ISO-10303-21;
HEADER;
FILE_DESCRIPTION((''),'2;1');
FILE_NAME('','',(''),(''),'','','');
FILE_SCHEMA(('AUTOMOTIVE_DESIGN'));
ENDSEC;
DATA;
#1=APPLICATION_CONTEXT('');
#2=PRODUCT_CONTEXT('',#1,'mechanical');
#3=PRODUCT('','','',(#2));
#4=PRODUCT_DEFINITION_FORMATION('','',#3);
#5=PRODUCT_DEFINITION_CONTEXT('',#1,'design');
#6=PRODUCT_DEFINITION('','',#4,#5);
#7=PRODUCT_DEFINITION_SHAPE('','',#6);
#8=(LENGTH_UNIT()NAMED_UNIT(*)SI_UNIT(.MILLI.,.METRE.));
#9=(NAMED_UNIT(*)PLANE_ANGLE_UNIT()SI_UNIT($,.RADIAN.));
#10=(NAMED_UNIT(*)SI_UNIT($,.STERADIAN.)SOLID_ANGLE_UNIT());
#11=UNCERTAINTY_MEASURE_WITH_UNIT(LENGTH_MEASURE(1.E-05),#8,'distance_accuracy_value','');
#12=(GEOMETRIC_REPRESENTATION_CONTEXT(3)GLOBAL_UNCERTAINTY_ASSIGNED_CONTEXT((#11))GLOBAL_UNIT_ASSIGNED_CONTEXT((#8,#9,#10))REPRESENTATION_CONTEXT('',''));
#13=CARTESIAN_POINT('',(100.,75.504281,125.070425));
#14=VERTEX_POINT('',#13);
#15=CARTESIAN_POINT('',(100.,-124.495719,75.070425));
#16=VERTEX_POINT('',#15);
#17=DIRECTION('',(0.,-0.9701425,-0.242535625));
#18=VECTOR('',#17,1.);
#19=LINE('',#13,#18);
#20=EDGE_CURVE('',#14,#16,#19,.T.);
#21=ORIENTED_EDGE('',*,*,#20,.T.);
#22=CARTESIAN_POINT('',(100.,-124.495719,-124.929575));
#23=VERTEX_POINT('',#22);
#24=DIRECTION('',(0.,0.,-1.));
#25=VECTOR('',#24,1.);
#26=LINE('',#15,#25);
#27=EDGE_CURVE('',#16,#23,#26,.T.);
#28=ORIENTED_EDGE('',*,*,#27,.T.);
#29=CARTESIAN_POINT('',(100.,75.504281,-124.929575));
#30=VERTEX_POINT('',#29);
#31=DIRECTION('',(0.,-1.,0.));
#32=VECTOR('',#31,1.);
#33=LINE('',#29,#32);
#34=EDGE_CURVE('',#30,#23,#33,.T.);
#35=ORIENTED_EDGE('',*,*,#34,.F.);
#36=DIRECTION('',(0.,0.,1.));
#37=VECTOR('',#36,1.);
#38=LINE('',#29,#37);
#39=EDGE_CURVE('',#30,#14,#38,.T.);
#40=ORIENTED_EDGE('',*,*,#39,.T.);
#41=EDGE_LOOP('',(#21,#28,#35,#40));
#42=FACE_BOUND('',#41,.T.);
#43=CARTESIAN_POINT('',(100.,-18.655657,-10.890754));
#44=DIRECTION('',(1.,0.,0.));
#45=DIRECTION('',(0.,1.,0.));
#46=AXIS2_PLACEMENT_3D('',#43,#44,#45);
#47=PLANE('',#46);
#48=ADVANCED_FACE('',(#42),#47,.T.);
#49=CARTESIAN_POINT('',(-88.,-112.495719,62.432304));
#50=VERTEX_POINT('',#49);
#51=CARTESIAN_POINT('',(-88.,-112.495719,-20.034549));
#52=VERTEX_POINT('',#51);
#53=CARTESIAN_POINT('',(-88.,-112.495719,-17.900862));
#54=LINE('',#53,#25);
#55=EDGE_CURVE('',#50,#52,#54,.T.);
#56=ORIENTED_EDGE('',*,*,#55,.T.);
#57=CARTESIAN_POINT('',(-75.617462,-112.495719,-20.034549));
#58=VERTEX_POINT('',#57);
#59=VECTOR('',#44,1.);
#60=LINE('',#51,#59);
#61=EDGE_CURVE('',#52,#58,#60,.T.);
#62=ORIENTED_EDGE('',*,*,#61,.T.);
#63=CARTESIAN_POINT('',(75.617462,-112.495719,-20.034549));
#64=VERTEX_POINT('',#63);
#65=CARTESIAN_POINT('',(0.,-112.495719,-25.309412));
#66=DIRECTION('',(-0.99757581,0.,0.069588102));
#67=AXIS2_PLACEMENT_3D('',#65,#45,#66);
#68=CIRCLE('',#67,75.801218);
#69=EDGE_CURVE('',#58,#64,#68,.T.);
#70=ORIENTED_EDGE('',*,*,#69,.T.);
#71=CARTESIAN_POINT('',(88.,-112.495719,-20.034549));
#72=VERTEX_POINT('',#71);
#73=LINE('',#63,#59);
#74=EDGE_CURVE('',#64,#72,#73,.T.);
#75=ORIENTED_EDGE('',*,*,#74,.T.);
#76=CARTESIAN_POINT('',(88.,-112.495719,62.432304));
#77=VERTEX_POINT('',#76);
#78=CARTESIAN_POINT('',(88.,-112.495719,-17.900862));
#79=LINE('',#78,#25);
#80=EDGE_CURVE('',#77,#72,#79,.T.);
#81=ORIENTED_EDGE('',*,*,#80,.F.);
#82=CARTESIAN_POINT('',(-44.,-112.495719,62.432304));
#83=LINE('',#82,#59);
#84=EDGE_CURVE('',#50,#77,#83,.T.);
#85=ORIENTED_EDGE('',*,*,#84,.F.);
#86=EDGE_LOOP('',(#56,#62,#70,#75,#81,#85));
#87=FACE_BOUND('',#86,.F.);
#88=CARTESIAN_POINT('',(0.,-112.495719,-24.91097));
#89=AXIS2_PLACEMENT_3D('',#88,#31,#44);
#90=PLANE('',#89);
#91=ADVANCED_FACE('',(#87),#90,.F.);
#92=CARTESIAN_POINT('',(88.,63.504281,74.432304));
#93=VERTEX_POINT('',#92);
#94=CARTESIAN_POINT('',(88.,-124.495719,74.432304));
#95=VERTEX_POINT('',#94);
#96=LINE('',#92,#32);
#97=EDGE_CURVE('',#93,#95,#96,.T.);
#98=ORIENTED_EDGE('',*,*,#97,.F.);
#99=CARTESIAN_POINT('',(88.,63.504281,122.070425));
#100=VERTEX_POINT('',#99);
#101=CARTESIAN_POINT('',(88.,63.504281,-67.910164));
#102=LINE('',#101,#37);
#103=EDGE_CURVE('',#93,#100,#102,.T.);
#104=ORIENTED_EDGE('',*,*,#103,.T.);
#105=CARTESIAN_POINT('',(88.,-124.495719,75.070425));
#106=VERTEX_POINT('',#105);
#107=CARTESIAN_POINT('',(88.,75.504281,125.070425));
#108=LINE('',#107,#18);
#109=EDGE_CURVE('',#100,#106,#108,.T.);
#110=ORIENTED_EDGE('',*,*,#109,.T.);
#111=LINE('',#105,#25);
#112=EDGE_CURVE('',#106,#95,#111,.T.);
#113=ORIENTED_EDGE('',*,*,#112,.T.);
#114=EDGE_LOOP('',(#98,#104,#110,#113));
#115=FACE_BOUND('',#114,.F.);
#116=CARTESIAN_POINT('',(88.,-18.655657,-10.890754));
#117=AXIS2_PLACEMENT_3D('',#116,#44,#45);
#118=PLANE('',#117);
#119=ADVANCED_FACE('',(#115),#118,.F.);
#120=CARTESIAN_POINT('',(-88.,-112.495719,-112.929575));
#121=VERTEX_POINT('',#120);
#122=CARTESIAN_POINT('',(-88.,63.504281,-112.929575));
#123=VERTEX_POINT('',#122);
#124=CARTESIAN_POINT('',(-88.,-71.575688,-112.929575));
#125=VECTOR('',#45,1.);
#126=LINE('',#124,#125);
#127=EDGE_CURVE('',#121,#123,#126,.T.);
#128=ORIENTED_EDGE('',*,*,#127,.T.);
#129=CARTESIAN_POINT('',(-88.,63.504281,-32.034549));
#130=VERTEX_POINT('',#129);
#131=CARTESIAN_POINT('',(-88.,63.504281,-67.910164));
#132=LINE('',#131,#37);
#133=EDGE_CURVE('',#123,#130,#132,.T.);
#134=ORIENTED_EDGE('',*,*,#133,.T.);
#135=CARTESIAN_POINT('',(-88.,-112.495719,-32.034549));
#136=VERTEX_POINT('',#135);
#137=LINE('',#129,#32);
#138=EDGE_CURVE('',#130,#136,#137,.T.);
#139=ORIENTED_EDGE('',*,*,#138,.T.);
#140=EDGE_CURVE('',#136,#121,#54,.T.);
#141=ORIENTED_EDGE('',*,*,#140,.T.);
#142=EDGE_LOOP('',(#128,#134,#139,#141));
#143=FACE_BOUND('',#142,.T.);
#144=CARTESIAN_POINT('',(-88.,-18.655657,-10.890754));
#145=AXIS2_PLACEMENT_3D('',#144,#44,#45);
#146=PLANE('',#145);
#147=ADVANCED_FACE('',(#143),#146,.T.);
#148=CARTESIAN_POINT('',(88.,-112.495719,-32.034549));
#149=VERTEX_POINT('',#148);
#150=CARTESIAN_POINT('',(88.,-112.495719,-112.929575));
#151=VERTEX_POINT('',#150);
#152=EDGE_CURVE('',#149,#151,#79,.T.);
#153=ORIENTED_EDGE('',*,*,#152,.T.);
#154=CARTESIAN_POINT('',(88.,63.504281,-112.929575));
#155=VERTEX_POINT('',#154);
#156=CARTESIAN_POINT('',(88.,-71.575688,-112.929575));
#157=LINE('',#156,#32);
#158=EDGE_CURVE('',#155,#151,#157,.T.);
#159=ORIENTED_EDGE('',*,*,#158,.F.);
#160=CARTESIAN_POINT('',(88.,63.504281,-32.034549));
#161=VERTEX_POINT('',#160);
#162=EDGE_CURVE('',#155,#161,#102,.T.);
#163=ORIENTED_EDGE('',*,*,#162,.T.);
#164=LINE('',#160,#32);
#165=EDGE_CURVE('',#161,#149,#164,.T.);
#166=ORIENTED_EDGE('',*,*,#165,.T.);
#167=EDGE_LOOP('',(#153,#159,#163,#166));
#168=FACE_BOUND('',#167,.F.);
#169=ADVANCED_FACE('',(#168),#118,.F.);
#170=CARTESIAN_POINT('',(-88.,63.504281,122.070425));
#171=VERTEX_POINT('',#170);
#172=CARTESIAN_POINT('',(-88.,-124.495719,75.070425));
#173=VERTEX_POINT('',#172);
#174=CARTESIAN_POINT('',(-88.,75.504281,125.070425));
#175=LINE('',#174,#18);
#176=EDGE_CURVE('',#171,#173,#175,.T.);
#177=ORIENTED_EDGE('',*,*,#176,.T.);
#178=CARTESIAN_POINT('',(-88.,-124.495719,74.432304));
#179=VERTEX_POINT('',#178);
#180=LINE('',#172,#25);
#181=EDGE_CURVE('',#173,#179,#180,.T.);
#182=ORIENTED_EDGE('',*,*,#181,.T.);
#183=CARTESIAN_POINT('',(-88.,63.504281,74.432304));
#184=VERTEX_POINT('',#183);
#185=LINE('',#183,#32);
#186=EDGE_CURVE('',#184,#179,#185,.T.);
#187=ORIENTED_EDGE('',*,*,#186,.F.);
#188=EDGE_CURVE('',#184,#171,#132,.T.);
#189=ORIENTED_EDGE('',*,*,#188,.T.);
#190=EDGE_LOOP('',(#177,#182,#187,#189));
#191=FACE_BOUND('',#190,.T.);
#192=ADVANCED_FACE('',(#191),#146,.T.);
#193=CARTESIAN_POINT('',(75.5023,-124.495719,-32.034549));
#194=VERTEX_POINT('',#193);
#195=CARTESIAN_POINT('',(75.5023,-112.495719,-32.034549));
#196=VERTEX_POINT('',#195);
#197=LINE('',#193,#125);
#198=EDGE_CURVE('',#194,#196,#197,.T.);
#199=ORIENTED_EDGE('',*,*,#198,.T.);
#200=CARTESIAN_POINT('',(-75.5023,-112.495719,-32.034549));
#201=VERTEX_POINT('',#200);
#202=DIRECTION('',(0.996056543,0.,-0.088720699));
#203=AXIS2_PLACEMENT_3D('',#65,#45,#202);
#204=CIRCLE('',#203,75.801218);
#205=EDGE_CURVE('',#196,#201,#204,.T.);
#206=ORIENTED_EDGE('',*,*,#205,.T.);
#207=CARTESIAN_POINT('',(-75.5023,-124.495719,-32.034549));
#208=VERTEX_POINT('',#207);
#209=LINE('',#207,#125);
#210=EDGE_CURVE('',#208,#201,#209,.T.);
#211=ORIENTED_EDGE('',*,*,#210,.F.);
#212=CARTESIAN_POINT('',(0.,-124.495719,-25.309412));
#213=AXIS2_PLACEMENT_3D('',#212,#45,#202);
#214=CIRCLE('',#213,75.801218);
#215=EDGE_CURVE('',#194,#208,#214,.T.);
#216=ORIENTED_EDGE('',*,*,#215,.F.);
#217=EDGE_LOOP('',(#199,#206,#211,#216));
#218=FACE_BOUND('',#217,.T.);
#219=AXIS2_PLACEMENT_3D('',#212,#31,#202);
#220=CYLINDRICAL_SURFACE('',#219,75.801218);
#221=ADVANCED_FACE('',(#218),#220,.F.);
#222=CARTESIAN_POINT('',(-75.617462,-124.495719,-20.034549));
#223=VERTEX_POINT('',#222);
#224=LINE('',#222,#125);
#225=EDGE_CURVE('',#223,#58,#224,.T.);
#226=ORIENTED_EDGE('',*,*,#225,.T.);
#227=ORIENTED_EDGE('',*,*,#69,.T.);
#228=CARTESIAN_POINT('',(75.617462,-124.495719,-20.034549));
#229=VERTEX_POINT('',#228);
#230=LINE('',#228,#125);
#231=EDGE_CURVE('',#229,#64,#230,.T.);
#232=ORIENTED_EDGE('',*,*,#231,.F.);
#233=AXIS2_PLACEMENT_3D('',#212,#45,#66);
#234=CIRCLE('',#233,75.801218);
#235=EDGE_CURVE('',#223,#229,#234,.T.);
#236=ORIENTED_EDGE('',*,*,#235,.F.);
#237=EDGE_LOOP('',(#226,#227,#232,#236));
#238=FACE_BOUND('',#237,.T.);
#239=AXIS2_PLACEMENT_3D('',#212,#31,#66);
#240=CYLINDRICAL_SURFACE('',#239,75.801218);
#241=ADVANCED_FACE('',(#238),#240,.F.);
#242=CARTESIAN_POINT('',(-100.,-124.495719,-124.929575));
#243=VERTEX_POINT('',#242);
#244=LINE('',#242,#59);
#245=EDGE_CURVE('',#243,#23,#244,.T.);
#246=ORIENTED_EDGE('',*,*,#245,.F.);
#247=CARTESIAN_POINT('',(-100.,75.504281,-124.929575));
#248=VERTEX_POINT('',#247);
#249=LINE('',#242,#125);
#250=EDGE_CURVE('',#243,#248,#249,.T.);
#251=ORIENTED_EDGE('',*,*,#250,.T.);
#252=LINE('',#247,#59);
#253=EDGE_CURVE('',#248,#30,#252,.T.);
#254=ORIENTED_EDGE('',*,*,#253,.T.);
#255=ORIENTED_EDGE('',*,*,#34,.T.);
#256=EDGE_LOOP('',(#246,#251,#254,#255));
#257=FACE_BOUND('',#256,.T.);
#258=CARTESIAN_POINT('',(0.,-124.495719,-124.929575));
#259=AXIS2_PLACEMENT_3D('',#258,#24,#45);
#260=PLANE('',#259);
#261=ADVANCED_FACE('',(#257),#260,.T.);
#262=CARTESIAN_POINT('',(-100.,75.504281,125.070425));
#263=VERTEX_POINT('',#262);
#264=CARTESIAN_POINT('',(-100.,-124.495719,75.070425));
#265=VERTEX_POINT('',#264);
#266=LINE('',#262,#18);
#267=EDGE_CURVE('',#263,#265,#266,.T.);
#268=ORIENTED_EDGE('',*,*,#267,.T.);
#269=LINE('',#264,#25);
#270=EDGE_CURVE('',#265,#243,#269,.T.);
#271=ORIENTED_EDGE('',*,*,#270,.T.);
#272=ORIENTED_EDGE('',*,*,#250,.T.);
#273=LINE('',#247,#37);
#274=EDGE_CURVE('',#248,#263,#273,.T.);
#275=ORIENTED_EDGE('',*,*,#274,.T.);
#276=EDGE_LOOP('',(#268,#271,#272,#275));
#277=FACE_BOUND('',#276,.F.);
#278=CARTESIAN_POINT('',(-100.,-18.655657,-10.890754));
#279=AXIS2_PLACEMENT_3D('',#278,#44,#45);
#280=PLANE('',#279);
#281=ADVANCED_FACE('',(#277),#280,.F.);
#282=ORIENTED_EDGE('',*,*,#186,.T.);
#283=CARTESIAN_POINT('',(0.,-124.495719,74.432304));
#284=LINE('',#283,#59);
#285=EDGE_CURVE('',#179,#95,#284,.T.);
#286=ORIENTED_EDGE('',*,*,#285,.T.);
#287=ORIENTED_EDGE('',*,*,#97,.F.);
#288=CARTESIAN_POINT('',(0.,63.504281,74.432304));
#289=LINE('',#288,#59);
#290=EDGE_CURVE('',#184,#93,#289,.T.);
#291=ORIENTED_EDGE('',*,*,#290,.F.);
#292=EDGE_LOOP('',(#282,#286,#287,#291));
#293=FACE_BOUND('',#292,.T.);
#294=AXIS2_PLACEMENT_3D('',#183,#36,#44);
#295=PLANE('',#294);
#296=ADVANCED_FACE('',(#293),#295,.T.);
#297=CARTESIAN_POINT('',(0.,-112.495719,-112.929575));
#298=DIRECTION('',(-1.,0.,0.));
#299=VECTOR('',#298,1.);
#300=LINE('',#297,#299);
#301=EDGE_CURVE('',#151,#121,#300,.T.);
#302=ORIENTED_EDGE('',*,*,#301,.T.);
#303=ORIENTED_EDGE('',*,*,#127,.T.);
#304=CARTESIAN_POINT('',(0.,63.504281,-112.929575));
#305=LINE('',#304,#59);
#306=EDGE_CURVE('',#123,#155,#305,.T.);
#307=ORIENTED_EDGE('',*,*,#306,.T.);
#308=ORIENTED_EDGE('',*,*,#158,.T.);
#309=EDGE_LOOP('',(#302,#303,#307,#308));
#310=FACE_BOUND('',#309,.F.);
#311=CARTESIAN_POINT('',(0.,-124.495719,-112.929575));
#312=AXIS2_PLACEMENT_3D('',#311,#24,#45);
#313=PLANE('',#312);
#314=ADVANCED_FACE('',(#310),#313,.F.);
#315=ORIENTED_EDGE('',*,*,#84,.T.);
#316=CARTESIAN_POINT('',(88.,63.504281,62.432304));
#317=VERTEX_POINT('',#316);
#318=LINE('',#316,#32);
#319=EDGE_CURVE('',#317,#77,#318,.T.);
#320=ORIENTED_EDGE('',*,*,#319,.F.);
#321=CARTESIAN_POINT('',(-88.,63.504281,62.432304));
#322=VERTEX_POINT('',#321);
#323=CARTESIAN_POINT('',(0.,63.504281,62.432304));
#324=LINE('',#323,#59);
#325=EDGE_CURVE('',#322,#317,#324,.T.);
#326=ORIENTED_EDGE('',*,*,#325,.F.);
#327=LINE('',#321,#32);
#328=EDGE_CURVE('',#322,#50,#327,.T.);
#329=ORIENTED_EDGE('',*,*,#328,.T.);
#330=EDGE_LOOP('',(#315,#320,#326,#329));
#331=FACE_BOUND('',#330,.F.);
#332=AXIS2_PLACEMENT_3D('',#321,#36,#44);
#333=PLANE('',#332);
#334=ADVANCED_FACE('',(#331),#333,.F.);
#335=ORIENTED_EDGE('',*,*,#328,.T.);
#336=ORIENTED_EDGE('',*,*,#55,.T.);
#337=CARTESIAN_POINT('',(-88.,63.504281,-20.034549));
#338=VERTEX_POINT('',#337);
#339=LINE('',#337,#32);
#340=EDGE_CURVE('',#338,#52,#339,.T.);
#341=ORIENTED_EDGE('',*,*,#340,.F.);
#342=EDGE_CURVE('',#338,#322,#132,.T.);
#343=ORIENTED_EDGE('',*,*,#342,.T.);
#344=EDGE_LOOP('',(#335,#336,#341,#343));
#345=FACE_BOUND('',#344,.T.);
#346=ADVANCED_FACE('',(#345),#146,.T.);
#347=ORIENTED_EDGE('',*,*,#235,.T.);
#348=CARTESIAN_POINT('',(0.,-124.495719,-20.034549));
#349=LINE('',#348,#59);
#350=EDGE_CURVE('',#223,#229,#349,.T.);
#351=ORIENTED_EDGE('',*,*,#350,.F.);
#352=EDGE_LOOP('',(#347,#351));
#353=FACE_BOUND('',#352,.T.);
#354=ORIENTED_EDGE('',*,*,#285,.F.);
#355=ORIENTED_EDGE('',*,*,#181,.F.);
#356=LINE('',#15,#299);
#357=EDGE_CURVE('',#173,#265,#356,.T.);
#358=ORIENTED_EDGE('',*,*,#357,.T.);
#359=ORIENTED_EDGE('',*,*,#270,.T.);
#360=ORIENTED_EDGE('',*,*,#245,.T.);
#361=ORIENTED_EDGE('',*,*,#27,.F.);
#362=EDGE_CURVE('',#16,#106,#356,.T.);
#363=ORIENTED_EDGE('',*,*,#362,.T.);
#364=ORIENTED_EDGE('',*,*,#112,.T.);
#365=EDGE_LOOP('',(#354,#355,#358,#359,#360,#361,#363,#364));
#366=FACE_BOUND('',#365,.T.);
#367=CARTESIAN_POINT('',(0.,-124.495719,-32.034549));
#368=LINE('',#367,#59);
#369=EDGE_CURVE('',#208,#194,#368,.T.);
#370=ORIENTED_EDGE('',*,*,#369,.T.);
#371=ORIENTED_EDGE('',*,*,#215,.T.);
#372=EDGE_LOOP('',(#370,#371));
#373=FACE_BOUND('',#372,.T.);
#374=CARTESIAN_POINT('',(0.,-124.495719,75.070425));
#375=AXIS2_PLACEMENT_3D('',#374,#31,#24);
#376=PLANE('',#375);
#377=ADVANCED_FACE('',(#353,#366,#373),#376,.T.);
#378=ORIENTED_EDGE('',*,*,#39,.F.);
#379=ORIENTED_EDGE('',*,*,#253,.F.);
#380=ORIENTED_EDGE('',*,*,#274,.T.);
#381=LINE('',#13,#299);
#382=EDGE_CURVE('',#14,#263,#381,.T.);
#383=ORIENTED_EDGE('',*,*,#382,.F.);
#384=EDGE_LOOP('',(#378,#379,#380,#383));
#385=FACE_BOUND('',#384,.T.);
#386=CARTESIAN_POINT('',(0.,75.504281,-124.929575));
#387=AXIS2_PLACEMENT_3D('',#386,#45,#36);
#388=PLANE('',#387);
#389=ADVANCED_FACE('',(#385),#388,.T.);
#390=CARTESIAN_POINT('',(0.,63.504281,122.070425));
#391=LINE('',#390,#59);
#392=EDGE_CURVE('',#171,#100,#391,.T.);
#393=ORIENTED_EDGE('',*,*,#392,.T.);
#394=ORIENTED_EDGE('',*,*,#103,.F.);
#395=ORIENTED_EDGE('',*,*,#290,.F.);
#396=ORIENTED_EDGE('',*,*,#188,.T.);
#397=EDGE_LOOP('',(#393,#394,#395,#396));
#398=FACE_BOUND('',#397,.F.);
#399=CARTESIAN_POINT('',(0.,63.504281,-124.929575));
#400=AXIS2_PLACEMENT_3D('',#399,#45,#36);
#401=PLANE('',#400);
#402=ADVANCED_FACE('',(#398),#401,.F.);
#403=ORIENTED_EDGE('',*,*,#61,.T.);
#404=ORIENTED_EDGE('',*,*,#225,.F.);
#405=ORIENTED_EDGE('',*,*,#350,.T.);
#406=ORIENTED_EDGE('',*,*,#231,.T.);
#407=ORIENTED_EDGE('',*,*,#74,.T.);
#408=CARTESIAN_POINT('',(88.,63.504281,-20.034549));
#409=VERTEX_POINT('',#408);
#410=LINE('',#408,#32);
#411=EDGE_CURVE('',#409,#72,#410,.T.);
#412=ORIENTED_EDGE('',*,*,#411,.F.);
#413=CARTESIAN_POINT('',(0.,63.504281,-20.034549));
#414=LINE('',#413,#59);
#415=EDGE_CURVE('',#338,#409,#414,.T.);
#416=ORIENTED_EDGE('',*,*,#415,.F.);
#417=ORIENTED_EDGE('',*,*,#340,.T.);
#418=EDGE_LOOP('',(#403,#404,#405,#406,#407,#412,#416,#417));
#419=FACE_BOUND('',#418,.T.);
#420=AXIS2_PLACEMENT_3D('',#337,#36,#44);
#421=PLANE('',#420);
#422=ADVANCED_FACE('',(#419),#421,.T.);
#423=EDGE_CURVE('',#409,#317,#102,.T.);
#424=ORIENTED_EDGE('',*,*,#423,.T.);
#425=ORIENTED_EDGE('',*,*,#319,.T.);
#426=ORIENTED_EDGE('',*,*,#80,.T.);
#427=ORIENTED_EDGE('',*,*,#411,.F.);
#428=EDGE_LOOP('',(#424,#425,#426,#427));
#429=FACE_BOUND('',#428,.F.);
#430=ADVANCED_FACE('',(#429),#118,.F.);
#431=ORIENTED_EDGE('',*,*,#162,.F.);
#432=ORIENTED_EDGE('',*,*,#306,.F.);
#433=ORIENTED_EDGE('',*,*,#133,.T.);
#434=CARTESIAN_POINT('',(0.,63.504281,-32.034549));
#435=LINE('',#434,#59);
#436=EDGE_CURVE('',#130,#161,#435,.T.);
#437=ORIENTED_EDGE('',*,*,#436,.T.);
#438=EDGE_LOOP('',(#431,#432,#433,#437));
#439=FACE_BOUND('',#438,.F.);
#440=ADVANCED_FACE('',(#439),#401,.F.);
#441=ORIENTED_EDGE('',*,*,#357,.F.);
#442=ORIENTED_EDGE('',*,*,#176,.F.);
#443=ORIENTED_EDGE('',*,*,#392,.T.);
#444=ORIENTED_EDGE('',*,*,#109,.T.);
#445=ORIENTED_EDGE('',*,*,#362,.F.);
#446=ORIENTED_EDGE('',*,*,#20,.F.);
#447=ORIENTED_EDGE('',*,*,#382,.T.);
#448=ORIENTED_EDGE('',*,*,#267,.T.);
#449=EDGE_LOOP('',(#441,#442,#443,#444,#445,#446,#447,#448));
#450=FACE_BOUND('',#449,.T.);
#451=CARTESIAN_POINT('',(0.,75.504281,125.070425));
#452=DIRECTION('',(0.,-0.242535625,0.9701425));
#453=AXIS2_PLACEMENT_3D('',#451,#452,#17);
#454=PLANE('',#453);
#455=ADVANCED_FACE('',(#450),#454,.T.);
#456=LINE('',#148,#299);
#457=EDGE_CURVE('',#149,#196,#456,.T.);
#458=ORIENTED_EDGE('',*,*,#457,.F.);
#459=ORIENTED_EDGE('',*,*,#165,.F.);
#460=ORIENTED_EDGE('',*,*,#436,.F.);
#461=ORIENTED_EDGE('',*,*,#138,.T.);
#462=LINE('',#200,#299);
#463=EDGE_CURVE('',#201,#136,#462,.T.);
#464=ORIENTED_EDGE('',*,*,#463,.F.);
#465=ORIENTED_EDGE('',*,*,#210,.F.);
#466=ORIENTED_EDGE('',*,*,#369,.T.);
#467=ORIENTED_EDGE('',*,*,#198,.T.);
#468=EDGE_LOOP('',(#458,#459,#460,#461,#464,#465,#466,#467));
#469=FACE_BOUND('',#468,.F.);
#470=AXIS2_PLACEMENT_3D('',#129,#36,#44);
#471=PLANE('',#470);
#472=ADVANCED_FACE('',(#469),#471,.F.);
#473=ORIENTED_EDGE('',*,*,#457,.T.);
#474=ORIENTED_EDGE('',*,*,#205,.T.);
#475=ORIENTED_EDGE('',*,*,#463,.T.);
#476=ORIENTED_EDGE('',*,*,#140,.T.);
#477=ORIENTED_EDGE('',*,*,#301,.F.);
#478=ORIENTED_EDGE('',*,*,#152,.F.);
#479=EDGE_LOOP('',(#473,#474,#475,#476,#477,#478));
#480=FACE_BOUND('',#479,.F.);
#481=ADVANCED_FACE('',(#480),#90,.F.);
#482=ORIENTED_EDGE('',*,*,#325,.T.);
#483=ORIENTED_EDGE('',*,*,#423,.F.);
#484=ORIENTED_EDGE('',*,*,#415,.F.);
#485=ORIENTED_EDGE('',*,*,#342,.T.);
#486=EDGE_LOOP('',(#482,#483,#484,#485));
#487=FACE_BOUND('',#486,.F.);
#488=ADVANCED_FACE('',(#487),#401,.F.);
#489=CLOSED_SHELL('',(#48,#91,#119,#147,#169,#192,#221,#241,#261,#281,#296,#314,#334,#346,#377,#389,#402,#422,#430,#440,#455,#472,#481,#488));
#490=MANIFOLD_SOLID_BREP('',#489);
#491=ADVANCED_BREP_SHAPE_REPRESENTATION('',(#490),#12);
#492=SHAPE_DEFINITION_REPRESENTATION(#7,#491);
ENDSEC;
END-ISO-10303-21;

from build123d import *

# Parameters (mm, degrees)
F1_DEPTH = 100
F2_T     = -12
F3_W     = 176
F3_H     = 12
F4_DEPTH = 188
F6_DEPTH = 12


with BuildPart() as f1:
    # F0 (on Right) → F1 (new body, symmetric)
    with BuildSketch(Plane.YZ):
        Polygon((-124.4957186917, 75.0704253932), (-124.4957186917, -124.9295746068), (75.5042813083, -124.9295746068), (75.5042813083, 125.0704253932), align=None)
    extrude(amount=F1_DEPTH, both=True)

    # F2
    f2_openings = [f1.faces().sort_by_distance(p)[0] for p in [
        (0, -124.495719, -24.929575),
        (0, -24.495719, 100.070425),
    ]]
    offset(amount=F2_T, openings=f2_openings)

    # F3 (on face) → F4 (join)
    with BuildSketch(Plane.XZ.offset(-63.5042813083)):
        with Locations((0, -26.0345488787)):
            Rectangle(F3_W, F3_H)
        with Locations((0, 68.4323040247)):
            Rectangle(F3_W, F3_H)
    extrude(amount=F4_DEPTH)

    # F5 (on face) → F6 (join)
    with BuildSketch(Plane.XZ.offset(124.4957186917)):
        Polygon((100, -124.9295746068), (100, 75.0704253932), (88, 75.0704253932), (88, 74.4323040247), (-88, 74.4323040247), (-88, 75.0704253932), (-100, 75.0704253932), (-100, -124.9295746068), align=None)
        Polygon((88, -112.9295746068), (-88, -112.9295746068), (-88, -32.0345488787), (-88, -20.0345488787), (-88, 62.4323040247), (88, 62.4323040247), (88, -20.0345488787), (88, -32.0345488787), align=None, mode=Mode.SUBTRACT)
        with BuildLine():
            Line((-88, 62.4323040247), (-88, -20.0345488787))
            Line((-88, -20.0345488787), (-75.6174618507, -20.0345488787))
            ThreePointArc((-75.6174618507, -20.0345488787), (0, 50.4918066225), (75.6174618507, -20.0345488787))
            Line((75.6174618507, -20.0345488787), (88, -20.0345488787))
            Line((88, -20.0345488787), (88, 62.4323040247))
            Line((88, 62.4323040247), (-88, 62.4323040247))
        make_face()
        with BuildLine():
            Line((-88, -32.0345488787), (-88, -112.9295746068))
            Line((-88, -112.9295746068), (88, -112.9295746068))
            Line((88, -112.9295746068), (88, -32.0345488787))
            Line((88, -32.0345488787), (75.5022996144, -32.0345488787))
            ThreePointArc((75.5022996144, -32.0345488787), (0, -101.1106302402), (-75.5022996144, -32.0345488787))
            Line((-75.5022996144, -32.0345488787), (-88, -32.0345488787))
        make_face()
    extrude(amount=-F6_DEPTH)


solid = f1.part
